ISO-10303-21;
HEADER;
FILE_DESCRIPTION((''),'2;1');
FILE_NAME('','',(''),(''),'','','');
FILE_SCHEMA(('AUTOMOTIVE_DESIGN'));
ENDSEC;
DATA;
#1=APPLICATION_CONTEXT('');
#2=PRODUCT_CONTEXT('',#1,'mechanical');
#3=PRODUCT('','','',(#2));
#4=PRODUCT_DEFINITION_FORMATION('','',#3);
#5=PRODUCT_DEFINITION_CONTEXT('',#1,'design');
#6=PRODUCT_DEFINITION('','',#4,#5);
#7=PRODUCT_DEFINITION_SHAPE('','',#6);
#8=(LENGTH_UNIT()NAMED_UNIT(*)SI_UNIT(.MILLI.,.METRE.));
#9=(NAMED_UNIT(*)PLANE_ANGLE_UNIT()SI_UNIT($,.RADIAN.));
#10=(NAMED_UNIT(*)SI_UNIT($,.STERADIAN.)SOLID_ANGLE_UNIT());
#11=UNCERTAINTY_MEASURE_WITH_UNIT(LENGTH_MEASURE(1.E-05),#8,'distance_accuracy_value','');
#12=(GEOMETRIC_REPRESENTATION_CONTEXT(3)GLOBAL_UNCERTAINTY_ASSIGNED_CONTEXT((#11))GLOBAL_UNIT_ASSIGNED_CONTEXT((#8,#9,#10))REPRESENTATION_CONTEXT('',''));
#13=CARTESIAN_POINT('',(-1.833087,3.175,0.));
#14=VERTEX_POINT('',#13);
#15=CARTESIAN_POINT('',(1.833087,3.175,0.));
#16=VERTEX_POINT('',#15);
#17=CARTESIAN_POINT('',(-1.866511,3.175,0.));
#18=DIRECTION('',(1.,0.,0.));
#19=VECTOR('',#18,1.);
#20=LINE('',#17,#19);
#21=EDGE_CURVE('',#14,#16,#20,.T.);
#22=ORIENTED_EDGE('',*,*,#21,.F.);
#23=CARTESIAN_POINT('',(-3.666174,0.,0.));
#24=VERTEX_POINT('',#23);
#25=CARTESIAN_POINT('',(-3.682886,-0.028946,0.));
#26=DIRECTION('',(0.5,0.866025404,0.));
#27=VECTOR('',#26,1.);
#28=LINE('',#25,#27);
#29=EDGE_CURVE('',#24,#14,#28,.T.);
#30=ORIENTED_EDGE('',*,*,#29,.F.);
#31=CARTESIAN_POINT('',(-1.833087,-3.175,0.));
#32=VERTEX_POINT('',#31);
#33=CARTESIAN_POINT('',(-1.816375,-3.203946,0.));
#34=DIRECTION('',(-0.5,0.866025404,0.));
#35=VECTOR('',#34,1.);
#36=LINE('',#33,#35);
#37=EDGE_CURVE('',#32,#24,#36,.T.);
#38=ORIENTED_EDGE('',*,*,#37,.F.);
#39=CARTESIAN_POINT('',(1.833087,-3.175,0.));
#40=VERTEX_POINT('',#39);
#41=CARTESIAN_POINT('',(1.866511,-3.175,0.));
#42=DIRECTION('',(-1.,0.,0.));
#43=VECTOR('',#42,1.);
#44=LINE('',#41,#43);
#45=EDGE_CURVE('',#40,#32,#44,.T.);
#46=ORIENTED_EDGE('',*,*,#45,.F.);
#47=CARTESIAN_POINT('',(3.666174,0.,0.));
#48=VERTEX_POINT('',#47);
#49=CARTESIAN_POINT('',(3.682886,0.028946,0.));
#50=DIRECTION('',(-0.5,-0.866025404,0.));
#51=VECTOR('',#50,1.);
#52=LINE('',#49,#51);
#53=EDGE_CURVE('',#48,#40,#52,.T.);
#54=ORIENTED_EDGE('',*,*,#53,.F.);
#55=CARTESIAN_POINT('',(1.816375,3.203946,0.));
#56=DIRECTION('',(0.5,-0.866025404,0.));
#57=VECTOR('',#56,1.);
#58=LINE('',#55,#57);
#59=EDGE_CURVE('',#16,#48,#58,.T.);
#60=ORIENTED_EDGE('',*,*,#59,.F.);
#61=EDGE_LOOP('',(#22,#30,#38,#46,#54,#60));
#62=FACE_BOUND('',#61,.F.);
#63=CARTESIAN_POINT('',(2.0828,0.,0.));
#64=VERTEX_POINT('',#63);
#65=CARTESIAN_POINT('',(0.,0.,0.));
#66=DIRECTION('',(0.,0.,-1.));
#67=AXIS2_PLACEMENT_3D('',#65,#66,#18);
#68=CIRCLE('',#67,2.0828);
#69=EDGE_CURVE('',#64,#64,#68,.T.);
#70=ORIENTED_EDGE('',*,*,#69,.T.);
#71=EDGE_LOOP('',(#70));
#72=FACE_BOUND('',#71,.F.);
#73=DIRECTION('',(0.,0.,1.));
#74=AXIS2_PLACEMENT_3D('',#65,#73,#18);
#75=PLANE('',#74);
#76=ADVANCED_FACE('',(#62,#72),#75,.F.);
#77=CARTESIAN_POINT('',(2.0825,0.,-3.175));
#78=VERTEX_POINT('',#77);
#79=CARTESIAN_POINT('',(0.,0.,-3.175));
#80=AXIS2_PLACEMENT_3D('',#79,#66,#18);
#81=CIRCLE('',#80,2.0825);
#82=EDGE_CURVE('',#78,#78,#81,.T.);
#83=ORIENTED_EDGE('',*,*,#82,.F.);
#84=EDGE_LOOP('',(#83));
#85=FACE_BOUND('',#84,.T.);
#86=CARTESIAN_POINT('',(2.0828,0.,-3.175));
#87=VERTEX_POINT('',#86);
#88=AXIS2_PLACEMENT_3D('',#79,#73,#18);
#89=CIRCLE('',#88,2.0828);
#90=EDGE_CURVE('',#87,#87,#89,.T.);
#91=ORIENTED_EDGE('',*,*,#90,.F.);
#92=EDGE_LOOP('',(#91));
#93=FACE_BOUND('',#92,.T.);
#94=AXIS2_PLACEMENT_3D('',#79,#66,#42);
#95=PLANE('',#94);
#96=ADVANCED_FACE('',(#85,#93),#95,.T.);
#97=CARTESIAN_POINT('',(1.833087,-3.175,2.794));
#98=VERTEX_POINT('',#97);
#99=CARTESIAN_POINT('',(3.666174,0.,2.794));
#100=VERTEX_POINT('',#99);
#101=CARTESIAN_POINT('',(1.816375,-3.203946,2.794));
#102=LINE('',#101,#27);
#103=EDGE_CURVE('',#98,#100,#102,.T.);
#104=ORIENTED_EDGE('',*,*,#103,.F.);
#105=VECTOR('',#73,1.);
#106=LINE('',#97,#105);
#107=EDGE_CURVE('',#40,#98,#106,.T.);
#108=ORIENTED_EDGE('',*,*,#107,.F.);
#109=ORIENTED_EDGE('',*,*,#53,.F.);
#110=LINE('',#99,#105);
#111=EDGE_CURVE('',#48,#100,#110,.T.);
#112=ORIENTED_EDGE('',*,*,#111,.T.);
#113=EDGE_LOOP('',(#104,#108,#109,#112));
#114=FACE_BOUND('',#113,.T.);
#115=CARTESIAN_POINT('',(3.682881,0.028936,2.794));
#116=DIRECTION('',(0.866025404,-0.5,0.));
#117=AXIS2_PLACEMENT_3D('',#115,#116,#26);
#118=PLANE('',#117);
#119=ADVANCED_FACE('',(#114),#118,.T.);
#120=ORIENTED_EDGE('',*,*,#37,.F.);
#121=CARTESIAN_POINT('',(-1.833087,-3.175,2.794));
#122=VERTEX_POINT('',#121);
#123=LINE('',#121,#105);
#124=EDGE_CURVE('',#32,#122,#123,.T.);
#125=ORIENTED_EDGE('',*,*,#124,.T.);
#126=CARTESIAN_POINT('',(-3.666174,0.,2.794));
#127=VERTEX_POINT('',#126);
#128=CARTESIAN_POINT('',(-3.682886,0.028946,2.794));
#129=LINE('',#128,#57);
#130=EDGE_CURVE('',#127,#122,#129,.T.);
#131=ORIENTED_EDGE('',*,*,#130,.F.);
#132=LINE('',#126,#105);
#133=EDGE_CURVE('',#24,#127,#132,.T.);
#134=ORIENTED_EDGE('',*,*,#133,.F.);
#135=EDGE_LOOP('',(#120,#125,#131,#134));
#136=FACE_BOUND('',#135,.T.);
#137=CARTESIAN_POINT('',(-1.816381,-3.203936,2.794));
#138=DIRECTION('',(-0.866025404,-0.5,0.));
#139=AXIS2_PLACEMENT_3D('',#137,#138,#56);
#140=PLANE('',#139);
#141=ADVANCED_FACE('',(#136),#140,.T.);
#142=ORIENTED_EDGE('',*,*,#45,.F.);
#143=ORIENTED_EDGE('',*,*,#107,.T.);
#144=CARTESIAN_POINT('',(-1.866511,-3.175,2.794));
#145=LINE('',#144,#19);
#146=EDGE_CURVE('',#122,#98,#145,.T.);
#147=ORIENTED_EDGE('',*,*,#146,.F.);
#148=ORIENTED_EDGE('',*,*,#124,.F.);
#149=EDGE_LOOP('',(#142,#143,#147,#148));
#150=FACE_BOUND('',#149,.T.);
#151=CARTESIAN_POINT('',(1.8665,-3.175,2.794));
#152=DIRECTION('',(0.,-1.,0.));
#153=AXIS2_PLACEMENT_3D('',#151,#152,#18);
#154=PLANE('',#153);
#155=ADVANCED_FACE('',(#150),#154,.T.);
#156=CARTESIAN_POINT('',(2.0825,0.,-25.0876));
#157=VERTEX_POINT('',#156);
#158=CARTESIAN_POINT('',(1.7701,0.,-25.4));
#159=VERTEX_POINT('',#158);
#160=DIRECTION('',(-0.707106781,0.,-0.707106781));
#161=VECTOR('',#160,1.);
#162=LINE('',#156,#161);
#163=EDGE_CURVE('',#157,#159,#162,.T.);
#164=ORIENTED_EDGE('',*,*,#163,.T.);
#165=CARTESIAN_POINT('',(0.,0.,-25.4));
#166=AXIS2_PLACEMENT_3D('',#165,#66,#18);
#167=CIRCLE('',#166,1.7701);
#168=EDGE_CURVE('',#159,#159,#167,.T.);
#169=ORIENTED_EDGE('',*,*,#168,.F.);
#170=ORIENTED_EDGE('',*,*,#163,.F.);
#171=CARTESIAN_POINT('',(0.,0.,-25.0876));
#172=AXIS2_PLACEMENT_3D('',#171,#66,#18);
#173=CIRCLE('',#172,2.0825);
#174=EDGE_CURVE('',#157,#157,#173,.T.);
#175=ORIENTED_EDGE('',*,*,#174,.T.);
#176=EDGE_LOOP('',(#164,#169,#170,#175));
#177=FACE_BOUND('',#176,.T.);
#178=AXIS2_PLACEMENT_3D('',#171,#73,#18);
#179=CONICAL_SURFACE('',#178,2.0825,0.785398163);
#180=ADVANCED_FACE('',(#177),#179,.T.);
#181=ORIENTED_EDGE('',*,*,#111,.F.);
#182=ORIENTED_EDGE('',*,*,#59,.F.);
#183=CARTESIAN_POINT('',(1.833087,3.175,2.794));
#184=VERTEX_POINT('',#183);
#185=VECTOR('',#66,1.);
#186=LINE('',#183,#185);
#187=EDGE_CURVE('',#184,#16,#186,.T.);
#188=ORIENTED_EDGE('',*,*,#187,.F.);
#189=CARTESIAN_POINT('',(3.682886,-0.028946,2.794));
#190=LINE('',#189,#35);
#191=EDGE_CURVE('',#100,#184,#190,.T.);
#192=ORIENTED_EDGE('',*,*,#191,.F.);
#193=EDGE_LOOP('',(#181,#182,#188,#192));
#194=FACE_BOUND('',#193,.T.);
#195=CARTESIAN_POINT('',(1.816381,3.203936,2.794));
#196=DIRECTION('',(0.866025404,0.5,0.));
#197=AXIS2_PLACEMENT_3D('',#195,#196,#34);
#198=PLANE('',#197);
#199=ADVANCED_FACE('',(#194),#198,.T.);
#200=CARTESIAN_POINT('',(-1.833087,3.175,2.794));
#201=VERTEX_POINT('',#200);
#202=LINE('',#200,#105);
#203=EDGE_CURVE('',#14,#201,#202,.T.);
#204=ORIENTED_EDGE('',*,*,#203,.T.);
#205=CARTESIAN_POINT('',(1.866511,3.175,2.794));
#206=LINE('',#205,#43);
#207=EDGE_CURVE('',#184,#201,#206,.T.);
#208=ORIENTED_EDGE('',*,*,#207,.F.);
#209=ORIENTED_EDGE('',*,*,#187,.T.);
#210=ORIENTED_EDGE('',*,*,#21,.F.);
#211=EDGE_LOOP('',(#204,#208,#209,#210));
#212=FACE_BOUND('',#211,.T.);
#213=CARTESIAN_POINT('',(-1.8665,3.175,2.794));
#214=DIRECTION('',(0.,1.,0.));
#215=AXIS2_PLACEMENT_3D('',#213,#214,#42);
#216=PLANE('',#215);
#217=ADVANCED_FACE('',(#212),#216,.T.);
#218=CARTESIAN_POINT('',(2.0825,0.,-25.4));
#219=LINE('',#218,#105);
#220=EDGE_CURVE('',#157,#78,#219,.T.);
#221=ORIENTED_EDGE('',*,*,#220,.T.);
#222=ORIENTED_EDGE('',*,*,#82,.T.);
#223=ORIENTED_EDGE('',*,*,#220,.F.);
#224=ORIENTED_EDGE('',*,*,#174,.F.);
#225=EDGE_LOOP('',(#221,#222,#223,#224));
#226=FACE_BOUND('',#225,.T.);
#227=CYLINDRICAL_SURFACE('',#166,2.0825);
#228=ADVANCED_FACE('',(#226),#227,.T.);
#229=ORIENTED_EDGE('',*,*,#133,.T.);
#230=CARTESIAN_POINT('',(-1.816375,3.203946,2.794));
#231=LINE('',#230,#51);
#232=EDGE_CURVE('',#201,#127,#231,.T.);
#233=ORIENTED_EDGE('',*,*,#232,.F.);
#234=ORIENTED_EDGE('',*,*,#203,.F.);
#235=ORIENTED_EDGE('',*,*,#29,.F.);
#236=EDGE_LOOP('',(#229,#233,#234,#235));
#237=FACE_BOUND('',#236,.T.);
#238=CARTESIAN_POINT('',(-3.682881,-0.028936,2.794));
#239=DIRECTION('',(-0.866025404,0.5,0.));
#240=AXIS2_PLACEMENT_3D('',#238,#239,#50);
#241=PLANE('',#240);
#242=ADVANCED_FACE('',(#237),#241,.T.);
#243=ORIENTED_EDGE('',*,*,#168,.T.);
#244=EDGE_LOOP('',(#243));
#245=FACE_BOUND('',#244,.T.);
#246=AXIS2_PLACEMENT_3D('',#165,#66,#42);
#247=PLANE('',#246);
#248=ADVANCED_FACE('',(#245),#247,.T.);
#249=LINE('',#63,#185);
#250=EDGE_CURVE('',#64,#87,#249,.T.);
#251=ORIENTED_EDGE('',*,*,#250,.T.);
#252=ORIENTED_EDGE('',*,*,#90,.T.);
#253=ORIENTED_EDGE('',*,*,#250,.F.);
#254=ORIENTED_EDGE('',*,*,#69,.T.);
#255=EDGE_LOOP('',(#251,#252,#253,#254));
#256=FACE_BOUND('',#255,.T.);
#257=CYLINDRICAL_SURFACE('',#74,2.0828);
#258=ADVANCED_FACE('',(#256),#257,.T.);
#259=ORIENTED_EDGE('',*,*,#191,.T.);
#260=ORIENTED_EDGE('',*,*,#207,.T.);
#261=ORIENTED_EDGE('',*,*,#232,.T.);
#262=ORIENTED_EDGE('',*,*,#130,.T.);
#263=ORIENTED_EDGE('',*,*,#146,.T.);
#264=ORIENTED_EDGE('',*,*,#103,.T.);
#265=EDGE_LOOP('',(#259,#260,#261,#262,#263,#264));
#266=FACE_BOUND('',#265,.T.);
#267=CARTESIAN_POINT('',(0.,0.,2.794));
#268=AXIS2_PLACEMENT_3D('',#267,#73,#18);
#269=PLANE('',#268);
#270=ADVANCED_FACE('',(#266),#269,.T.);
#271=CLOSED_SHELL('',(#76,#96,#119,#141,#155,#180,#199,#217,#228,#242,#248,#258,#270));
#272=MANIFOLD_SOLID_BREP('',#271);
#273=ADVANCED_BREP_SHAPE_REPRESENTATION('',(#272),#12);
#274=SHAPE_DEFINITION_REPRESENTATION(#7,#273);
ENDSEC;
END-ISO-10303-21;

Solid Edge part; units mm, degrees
sketch "Sketch1" plane through (0, 0, 0) normal (0, 0, 1) x (1, 0, 0)
  circle A0 centre (0, 0) radius 3.683
  dimension "D1" = 7.366
extrude "Protrusion1" add sketch "Sketch1" along normal blind 2.794
sketch "Sketch2" plane through (0, 0, 0) normal (0, 0, -1) x (1, 0, 0)
  circle A0 centre (0, 0) radius 2.0828
extrude "Protrusion2" add sketch "Sketch2" along normal blind 25.4
sketch "Sketch3" plane through (0, 0, -25.4) normal (0, 0, -1) x (1, 0, 0)
  circle A0 centre (0, 0) radius 2.0825
extrude "Cutout1" cut sketch "Sketch3" against normal blind 22.225 flip side to cut
chamfer "Chamfer_1" distance 0.3124 angle 45 1 edges at (-2.0825, 0, -25.4)
sketch "Sketch4" plane through (0, 0, 2.794) normal (0, 0, 1) x (1, 0, 0)
  line L0 (-1.8665, 3.175) -> (1.8665, 3.175)
  dimension "D1" = 6.35
extrude "Cutout2" cut sketch "Sketch4" against normal up to next material side at (0, 3.225, 2.794)
pattern_circular "Pattern1" count 6 over 360 about axis through (0, 0, 2.794) along (0, 0, 1) of "Cutout2"
properties part number "119094"
